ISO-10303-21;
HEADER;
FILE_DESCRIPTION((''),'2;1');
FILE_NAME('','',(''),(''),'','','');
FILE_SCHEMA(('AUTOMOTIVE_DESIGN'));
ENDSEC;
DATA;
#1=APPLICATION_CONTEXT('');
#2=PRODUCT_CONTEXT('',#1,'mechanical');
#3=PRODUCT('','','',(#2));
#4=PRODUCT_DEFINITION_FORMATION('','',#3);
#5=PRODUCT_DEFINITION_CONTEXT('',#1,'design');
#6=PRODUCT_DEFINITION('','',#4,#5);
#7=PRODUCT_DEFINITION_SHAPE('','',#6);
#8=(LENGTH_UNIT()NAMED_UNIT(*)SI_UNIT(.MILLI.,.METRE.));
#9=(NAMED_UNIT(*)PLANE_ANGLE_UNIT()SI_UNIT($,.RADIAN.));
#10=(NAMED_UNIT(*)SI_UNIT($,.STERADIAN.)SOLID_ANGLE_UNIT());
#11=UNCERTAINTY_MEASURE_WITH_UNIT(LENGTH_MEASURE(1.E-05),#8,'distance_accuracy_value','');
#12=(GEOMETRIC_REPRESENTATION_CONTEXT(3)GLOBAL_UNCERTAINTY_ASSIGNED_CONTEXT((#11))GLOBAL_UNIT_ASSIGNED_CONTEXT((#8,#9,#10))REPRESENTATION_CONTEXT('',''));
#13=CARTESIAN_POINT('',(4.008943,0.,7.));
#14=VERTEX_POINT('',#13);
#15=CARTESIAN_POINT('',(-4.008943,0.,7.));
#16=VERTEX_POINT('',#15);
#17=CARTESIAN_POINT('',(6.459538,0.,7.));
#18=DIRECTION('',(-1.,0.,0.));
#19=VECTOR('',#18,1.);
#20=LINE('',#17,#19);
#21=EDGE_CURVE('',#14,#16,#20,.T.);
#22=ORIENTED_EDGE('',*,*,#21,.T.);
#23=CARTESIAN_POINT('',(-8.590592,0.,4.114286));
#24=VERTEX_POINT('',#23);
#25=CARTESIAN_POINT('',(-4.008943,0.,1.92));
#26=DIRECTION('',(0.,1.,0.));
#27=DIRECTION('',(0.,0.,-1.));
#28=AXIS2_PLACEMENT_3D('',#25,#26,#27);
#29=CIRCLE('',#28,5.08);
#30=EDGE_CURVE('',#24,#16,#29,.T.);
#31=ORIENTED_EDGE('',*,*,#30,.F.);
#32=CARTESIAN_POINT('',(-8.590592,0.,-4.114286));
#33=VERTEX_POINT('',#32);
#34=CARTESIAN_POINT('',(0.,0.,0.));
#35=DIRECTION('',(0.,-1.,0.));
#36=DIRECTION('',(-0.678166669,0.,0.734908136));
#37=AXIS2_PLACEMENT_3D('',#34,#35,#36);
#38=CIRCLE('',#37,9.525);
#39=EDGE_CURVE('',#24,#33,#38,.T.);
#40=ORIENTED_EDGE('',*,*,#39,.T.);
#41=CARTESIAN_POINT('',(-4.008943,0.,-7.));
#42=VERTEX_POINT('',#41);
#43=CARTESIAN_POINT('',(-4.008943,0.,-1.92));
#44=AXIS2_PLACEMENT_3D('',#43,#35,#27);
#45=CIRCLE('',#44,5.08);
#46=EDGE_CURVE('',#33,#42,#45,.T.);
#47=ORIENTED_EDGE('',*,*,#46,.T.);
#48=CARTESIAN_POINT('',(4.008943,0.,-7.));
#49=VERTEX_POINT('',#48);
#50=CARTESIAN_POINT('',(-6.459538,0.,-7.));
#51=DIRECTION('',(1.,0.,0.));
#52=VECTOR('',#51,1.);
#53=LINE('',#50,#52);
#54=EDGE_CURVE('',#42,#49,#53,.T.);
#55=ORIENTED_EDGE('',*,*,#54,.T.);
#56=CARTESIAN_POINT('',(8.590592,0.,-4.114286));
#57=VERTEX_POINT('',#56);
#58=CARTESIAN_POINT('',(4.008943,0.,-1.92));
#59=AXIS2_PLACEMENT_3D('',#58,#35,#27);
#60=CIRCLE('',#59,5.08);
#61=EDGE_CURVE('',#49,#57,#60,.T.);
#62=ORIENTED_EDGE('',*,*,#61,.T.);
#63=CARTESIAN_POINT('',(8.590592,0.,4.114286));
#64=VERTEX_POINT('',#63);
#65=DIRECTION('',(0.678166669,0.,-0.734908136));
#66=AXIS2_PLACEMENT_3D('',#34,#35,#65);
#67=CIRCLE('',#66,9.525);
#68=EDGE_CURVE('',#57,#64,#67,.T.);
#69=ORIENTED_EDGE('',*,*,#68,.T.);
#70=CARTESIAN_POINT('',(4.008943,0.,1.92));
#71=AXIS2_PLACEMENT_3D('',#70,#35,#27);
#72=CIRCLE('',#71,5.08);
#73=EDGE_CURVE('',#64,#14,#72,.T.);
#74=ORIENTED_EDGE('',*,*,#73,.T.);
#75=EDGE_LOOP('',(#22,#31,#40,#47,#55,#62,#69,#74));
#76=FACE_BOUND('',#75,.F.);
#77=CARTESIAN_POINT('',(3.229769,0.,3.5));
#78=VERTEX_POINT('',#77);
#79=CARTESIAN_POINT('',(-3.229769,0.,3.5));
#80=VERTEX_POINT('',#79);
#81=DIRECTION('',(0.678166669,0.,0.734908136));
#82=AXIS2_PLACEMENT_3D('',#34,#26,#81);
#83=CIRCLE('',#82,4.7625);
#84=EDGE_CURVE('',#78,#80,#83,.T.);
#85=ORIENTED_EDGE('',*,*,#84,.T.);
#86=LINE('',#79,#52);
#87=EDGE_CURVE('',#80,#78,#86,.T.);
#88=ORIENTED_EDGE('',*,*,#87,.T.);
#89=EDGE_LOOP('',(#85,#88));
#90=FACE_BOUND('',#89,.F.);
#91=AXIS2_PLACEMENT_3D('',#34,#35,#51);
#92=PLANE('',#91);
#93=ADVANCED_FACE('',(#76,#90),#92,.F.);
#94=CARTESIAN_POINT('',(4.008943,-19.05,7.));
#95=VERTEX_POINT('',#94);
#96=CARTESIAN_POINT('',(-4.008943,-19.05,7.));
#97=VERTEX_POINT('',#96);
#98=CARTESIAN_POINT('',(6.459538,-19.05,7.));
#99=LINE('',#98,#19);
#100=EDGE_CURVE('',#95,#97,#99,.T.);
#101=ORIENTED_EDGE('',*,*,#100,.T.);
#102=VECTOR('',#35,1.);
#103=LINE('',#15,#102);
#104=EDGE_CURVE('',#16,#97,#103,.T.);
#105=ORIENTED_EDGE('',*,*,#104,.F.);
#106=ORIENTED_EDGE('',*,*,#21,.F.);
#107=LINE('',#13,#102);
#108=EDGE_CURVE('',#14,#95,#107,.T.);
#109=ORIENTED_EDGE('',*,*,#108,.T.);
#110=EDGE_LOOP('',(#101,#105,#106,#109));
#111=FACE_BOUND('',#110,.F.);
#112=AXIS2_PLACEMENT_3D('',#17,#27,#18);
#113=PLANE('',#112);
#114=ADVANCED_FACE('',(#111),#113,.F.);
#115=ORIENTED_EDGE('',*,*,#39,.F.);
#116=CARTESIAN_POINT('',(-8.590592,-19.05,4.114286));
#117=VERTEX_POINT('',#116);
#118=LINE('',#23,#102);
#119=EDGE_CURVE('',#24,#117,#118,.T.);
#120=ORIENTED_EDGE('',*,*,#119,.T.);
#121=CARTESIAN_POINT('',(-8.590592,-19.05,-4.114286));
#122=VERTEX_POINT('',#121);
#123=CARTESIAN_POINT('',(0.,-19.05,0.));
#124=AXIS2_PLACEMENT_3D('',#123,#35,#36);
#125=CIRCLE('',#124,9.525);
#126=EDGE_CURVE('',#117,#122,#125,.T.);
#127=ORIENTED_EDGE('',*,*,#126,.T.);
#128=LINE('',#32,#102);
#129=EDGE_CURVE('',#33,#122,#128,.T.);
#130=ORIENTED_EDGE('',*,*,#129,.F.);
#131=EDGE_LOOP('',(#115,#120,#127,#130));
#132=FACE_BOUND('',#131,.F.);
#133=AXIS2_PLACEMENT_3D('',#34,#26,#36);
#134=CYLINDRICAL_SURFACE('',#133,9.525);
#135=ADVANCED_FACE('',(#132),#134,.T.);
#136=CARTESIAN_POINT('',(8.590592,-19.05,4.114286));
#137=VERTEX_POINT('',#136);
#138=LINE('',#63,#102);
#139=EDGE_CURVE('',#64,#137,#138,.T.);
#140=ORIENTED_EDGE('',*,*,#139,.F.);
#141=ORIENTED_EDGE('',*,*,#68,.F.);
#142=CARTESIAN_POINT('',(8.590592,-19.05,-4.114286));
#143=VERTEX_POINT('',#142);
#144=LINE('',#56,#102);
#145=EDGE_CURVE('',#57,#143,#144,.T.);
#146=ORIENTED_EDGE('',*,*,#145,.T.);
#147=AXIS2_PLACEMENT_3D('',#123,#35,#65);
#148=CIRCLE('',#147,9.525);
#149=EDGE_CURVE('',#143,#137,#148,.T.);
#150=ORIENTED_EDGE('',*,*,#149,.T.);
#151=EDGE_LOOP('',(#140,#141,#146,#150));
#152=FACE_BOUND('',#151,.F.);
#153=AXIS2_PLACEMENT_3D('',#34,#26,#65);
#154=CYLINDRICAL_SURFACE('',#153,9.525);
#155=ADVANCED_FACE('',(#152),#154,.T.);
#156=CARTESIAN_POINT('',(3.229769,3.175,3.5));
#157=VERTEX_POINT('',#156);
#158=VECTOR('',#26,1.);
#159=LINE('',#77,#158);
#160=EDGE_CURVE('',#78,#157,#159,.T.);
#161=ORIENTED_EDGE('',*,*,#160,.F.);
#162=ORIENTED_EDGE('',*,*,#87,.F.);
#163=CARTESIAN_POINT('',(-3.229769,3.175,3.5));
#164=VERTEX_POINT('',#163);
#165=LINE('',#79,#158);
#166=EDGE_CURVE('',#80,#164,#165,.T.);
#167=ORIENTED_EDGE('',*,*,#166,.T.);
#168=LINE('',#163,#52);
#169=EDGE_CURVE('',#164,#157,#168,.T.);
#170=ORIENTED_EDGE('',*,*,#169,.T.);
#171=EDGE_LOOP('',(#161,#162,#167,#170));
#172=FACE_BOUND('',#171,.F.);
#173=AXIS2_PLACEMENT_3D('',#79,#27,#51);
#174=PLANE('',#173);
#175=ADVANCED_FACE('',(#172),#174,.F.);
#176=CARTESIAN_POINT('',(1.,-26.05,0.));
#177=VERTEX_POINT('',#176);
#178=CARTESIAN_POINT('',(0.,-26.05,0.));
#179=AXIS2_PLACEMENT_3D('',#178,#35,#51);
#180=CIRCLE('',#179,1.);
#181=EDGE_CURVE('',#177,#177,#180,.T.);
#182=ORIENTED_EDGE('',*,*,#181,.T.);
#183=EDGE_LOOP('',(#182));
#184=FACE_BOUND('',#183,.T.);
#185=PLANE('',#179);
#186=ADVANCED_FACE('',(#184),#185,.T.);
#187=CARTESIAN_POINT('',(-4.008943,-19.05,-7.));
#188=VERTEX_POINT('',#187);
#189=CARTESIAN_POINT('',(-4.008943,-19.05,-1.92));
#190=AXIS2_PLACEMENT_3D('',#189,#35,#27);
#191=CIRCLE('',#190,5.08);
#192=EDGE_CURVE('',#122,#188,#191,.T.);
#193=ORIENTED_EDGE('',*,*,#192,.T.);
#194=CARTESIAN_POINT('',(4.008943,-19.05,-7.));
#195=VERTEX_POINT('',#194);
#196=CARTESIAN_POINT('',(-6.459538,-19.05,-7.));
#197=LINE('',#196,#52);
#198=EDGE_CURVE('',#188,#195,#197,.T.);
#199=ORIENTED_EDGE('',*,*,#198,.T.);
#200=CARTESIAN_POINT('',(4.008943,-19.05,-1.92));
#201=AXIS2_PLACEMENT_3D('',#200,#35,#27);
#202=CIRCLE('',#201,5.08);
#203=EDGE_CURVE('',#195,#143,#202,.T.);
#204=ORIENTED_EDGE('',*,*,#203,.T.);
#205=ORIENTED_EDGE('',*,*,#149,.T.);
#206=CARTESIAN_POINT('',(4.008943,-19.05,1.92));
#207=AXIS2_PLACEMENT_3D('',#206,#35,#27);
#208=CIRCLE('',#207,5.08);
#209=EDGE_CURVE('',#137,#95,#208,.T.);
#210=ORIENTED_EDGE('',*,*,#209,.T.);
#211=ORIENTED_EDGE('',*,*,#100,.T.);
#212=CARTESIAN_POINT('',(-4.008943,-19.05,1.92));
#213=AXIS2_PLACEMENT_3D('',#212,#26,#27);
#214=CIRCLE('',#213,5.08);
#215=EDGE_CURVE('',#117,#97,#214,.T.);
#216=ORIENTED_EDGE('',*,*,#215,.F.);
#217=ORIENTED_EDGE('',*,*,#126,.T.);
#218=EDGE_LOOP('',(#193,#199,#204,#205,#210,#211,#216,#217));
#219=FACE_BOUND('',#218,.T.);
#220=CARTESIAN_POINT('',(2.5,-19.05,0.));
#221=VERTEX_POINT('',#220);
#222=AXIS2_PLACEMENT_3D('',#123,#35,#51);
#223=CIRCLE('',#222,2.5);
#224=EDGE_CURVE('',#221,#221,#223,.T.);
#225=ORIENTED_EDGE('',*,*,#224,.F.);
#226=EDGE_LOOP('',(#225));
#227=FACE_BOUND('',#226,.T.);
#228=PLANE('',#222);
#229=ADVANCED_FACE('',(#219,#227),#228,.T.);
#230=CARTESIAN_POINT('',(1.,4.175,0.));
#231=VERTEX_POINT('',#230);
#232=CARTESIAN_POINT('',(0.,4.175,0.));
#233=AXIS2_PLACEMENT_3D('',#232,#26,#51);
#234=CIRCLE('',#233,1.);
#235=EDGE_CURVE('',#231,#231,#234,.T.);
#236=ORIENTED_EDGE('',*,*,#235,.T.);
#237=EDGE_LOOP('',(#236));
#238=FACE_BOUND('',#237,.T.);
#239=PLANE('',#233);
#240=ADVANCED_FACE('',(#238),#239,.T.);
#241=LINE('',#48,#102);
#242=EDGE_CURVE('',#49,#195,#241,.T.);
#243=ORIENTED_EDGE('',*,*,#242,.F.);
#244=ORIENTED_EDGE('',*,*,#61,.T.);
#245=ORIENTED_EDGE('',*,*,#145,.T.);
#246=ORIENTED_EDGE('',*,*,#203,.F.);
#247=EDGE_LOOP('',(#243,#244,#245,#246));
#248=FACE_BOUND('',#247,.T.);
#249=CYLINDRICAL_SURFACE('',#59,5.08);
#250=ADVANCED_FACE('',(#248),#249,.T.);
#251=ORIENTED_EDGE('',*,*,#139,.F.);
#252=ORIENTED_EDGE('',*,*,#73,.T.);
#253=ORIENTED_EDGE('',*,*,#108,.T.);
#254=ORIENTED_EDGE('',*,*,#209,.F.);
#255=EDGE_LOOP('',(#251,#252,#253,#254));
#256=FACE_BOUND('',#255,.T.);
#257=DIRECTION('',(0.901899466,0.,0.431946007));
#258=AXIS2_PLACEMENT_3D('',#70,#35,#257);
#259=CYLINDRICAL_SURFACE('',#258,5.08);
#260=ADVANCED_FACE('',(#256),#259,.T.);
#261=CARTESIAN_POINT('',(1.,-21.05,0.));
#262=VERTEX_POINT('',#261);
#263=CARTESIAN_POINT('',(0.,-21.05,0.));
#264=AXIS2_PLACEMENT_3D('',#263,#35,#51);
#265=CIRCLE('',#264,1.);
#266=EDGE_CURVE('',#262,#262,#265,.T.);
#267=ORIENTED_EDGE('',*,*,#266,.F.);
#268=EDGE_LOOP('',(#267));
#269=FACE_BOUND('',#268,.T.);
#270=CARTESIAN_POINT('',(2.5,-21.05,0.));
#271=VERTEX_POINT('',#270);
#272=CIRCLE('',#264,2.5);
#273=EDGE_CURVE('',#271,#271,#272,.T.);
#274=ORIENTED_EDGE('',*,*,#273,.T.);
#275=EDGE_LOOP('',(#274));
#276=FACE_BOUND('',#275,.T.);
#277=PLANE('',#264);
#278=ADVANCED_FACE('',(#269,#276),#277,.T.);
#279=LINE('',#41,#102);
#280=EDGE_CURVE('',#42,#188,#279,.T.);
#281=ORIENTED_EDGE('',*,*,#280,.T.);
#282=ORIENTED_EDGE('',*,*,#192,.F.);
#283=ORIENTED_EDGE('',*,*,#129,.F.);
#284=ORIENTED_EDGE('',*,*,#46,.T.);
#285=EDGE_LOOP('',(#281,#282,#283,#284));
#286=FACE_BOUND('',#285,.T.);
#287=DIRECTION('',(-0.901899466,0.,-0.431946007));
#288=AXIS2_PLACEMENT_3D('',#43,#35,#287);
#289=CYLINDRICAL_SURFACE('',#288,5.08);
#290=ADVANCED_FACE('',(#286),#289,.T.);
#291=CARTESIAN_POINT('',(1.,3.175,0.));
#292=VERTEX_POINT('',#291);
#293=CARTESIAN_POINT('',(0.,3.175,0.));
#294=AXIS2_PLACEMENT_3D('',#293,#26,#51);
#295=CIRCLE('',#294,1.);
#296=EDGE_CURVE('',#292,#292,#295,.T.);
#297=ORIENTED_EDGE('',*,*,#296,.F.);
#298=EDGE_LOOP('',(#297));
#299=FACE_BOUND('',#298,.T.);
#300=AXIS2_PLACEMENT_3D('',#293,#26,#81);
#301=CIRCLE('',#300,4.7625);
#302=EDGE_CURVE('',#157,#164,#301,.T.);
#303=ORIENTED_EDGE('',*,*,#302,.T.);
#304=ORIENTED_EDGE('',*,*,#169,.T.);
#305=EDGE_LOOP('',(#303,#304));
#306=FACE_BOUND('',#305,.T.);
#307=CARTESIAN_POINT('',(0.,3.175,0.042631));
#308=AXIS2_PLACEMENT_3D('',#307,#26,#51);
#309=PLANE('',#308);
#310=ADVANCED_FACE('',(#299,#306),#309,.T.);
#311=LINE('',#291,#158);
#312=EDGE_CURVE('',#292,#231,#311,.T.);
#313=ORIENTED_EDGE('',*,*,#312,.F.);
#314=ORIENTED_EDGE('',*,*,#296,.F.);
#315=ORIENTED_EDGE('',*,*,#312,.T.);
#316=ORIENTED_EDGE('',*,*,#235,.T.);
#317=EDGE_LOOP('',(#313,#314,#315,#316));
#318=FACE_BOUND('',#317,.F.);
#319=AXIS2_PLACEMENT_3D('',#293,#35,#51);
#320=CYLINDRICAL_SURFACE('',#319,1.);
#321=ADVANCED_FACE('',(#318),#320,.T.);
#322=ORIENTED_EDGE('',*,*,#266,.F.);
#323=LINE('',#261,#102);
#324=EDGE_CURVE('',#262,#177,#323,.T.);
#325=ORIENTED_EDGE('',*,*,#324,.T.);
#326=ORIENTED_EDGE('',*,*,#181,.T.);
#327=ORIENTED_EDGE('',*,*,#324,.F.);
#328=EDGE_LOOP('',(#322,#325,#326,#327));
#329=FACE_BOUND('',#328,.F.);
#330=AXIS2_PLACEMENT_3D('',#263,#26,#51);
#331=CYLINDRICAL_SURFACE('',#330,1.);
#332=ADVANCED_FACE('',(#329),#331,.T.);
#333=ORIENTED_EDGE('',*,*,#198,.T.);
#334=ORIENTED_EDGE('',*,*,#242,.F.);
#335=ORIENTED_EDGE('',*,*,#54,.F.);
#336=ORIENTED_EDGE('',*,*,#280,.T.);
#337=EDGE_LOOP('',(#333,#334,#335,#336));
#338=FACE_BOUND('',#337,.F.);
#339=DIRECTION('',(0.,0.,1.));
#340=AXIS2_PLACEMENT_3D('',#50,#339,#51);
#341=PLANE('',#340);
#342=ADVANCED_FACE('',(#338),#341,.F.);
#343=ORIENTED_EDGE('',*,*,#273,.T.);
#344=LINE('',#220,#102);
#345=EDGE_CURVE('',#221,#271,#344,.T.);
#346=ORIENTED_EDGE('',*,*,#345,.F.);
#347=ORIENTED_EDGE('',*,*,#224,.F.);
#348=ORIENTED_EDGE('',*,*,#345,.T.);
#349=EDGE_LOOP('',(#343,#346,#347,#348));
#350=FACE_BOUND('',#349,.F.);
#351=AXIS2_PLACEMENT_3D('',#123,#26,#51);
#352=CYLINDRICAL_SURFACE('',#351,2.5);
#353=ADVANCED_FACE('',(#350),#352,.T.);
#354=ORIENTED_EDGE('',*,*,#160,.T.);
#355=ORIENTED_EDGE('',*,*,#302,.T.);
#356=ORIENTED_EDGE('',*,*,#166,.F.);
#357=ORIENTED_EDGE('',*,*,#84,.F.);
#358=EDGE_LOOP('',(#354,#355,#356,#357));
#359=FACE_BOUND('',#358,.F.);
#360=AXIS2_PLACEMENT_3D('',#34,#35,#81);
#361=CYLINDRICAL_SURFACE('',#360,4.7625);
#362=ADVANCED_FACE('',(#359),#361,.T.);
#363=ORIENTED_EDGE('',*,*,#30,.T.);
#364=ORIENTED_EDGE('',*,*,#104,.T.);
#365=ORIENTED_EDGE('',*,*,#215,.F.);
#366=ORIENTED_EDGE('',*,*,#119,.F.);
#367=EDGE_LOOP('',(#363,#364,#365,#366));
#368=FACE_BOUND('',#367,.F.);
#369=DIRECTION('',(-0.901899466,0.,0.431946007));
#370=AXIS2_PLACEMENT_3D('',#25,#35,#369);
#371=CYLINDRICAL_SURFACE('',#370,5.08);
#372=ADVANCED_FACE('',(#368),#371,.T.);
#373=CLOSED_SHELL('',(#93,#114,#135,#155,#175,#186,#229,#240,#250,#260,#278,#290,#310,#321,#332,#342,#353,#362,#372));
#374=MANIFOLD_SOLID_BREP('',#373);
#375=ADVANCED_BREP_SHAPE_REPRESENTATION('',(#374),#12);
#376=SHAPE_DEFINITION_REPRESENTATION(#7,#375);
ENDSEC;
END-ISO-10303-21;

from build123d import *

# Parameters (mm, degrees)
F1_DEPTH  = 19.05
F2_R      = 5.08
F3_R      = 2.5
F4_DEPTH  = 2
F5_R      = 1
F6_DEPTH  = 5
F8_DEPTH  = 3.175
F9_R      = 1
F10_DEPTH = 1
F12_ANGLE = 90


# Not quite as in the source:
# - a length typed as a fraction of an inch, garbled in the dataset ("3 / 203.2 mm" for 3/8 in), is restored


with BuildPart() as f1:
    # F0 (on Top) → F1 (new body)
    with BuildSketch(Plane.XY):
        with BuildLine():
            Line((0, 7), (-6.4595375221, 7))
            ThreePointArc((-6.4595375221, 7), (-9.525, 0), (-6.4595375221, -7))
            Line((-6.4595375221, -7), (6.4595375221, -7))
            ThreePointArc((6.4595375221, -7), (9.525, 0), (6.4595375221, 7))
            Line((6.4595375221, 7), (0, 7))
        make_face()
    extrude(amount=F1_DEPTH)

    # F2
    f2_edges = [f1.edges().sort_by_distance(p)[0] for p in [
        (-6.459538, -7, 9.525),
        (6.459538, -7, 9.525),
        (-6.459538, 7, 9.525),
        (6.459538, 7, 9.525),
    ]]
    fillet(f2_edges, radius=F2_R)

    # F3 (on face) → F4 (join)
    with BuildSketch(Plane.XY.offset(19.05)):
        Circle(F3_R)
    extrude(amount=F4_DEPTH)

    # F5 (on face) → F6 (join)
    with BuildSketch(Plane.XY.offset(21.05)):
        Circle(F5_R)
    extrude(amount=F6_DEPTH)

    # F7 (on face) → F8 (join)
    with BuildSketch(Plane(origin=(0, 0, 0), x_dir=(1, 0, 0), z_dir=(0, 0, -1))):
        with BuildLine():
            Line((0, -3.5), (3.2297687611, -3.5))
            ThreePointArc((3.2297687611, -3.5), (0, 4.7625), (-3.2297687611, -3.5))
            Line((-3.2297687611, -3.5), (0, -3.5))
        make_face()
    extrude(amount=F8_DEPTH)

    # F9 (on face) → F10 (join)
    with BuildSketch(Plane(origin=(0, 0, -3.175), x_dir=(1, 0, 0), z_dir=(0, 0, -1))):
        Circle(F9_R)
    extrude(amount=F10_DEPTH)


with BuildPart() as f1_1:
    # F12: moved
    add(f1.part.rotate(Axis((1.8931087106, 0, 0), (1, 0, 0)), F12_ANGLE))


solid = f1_1.part
